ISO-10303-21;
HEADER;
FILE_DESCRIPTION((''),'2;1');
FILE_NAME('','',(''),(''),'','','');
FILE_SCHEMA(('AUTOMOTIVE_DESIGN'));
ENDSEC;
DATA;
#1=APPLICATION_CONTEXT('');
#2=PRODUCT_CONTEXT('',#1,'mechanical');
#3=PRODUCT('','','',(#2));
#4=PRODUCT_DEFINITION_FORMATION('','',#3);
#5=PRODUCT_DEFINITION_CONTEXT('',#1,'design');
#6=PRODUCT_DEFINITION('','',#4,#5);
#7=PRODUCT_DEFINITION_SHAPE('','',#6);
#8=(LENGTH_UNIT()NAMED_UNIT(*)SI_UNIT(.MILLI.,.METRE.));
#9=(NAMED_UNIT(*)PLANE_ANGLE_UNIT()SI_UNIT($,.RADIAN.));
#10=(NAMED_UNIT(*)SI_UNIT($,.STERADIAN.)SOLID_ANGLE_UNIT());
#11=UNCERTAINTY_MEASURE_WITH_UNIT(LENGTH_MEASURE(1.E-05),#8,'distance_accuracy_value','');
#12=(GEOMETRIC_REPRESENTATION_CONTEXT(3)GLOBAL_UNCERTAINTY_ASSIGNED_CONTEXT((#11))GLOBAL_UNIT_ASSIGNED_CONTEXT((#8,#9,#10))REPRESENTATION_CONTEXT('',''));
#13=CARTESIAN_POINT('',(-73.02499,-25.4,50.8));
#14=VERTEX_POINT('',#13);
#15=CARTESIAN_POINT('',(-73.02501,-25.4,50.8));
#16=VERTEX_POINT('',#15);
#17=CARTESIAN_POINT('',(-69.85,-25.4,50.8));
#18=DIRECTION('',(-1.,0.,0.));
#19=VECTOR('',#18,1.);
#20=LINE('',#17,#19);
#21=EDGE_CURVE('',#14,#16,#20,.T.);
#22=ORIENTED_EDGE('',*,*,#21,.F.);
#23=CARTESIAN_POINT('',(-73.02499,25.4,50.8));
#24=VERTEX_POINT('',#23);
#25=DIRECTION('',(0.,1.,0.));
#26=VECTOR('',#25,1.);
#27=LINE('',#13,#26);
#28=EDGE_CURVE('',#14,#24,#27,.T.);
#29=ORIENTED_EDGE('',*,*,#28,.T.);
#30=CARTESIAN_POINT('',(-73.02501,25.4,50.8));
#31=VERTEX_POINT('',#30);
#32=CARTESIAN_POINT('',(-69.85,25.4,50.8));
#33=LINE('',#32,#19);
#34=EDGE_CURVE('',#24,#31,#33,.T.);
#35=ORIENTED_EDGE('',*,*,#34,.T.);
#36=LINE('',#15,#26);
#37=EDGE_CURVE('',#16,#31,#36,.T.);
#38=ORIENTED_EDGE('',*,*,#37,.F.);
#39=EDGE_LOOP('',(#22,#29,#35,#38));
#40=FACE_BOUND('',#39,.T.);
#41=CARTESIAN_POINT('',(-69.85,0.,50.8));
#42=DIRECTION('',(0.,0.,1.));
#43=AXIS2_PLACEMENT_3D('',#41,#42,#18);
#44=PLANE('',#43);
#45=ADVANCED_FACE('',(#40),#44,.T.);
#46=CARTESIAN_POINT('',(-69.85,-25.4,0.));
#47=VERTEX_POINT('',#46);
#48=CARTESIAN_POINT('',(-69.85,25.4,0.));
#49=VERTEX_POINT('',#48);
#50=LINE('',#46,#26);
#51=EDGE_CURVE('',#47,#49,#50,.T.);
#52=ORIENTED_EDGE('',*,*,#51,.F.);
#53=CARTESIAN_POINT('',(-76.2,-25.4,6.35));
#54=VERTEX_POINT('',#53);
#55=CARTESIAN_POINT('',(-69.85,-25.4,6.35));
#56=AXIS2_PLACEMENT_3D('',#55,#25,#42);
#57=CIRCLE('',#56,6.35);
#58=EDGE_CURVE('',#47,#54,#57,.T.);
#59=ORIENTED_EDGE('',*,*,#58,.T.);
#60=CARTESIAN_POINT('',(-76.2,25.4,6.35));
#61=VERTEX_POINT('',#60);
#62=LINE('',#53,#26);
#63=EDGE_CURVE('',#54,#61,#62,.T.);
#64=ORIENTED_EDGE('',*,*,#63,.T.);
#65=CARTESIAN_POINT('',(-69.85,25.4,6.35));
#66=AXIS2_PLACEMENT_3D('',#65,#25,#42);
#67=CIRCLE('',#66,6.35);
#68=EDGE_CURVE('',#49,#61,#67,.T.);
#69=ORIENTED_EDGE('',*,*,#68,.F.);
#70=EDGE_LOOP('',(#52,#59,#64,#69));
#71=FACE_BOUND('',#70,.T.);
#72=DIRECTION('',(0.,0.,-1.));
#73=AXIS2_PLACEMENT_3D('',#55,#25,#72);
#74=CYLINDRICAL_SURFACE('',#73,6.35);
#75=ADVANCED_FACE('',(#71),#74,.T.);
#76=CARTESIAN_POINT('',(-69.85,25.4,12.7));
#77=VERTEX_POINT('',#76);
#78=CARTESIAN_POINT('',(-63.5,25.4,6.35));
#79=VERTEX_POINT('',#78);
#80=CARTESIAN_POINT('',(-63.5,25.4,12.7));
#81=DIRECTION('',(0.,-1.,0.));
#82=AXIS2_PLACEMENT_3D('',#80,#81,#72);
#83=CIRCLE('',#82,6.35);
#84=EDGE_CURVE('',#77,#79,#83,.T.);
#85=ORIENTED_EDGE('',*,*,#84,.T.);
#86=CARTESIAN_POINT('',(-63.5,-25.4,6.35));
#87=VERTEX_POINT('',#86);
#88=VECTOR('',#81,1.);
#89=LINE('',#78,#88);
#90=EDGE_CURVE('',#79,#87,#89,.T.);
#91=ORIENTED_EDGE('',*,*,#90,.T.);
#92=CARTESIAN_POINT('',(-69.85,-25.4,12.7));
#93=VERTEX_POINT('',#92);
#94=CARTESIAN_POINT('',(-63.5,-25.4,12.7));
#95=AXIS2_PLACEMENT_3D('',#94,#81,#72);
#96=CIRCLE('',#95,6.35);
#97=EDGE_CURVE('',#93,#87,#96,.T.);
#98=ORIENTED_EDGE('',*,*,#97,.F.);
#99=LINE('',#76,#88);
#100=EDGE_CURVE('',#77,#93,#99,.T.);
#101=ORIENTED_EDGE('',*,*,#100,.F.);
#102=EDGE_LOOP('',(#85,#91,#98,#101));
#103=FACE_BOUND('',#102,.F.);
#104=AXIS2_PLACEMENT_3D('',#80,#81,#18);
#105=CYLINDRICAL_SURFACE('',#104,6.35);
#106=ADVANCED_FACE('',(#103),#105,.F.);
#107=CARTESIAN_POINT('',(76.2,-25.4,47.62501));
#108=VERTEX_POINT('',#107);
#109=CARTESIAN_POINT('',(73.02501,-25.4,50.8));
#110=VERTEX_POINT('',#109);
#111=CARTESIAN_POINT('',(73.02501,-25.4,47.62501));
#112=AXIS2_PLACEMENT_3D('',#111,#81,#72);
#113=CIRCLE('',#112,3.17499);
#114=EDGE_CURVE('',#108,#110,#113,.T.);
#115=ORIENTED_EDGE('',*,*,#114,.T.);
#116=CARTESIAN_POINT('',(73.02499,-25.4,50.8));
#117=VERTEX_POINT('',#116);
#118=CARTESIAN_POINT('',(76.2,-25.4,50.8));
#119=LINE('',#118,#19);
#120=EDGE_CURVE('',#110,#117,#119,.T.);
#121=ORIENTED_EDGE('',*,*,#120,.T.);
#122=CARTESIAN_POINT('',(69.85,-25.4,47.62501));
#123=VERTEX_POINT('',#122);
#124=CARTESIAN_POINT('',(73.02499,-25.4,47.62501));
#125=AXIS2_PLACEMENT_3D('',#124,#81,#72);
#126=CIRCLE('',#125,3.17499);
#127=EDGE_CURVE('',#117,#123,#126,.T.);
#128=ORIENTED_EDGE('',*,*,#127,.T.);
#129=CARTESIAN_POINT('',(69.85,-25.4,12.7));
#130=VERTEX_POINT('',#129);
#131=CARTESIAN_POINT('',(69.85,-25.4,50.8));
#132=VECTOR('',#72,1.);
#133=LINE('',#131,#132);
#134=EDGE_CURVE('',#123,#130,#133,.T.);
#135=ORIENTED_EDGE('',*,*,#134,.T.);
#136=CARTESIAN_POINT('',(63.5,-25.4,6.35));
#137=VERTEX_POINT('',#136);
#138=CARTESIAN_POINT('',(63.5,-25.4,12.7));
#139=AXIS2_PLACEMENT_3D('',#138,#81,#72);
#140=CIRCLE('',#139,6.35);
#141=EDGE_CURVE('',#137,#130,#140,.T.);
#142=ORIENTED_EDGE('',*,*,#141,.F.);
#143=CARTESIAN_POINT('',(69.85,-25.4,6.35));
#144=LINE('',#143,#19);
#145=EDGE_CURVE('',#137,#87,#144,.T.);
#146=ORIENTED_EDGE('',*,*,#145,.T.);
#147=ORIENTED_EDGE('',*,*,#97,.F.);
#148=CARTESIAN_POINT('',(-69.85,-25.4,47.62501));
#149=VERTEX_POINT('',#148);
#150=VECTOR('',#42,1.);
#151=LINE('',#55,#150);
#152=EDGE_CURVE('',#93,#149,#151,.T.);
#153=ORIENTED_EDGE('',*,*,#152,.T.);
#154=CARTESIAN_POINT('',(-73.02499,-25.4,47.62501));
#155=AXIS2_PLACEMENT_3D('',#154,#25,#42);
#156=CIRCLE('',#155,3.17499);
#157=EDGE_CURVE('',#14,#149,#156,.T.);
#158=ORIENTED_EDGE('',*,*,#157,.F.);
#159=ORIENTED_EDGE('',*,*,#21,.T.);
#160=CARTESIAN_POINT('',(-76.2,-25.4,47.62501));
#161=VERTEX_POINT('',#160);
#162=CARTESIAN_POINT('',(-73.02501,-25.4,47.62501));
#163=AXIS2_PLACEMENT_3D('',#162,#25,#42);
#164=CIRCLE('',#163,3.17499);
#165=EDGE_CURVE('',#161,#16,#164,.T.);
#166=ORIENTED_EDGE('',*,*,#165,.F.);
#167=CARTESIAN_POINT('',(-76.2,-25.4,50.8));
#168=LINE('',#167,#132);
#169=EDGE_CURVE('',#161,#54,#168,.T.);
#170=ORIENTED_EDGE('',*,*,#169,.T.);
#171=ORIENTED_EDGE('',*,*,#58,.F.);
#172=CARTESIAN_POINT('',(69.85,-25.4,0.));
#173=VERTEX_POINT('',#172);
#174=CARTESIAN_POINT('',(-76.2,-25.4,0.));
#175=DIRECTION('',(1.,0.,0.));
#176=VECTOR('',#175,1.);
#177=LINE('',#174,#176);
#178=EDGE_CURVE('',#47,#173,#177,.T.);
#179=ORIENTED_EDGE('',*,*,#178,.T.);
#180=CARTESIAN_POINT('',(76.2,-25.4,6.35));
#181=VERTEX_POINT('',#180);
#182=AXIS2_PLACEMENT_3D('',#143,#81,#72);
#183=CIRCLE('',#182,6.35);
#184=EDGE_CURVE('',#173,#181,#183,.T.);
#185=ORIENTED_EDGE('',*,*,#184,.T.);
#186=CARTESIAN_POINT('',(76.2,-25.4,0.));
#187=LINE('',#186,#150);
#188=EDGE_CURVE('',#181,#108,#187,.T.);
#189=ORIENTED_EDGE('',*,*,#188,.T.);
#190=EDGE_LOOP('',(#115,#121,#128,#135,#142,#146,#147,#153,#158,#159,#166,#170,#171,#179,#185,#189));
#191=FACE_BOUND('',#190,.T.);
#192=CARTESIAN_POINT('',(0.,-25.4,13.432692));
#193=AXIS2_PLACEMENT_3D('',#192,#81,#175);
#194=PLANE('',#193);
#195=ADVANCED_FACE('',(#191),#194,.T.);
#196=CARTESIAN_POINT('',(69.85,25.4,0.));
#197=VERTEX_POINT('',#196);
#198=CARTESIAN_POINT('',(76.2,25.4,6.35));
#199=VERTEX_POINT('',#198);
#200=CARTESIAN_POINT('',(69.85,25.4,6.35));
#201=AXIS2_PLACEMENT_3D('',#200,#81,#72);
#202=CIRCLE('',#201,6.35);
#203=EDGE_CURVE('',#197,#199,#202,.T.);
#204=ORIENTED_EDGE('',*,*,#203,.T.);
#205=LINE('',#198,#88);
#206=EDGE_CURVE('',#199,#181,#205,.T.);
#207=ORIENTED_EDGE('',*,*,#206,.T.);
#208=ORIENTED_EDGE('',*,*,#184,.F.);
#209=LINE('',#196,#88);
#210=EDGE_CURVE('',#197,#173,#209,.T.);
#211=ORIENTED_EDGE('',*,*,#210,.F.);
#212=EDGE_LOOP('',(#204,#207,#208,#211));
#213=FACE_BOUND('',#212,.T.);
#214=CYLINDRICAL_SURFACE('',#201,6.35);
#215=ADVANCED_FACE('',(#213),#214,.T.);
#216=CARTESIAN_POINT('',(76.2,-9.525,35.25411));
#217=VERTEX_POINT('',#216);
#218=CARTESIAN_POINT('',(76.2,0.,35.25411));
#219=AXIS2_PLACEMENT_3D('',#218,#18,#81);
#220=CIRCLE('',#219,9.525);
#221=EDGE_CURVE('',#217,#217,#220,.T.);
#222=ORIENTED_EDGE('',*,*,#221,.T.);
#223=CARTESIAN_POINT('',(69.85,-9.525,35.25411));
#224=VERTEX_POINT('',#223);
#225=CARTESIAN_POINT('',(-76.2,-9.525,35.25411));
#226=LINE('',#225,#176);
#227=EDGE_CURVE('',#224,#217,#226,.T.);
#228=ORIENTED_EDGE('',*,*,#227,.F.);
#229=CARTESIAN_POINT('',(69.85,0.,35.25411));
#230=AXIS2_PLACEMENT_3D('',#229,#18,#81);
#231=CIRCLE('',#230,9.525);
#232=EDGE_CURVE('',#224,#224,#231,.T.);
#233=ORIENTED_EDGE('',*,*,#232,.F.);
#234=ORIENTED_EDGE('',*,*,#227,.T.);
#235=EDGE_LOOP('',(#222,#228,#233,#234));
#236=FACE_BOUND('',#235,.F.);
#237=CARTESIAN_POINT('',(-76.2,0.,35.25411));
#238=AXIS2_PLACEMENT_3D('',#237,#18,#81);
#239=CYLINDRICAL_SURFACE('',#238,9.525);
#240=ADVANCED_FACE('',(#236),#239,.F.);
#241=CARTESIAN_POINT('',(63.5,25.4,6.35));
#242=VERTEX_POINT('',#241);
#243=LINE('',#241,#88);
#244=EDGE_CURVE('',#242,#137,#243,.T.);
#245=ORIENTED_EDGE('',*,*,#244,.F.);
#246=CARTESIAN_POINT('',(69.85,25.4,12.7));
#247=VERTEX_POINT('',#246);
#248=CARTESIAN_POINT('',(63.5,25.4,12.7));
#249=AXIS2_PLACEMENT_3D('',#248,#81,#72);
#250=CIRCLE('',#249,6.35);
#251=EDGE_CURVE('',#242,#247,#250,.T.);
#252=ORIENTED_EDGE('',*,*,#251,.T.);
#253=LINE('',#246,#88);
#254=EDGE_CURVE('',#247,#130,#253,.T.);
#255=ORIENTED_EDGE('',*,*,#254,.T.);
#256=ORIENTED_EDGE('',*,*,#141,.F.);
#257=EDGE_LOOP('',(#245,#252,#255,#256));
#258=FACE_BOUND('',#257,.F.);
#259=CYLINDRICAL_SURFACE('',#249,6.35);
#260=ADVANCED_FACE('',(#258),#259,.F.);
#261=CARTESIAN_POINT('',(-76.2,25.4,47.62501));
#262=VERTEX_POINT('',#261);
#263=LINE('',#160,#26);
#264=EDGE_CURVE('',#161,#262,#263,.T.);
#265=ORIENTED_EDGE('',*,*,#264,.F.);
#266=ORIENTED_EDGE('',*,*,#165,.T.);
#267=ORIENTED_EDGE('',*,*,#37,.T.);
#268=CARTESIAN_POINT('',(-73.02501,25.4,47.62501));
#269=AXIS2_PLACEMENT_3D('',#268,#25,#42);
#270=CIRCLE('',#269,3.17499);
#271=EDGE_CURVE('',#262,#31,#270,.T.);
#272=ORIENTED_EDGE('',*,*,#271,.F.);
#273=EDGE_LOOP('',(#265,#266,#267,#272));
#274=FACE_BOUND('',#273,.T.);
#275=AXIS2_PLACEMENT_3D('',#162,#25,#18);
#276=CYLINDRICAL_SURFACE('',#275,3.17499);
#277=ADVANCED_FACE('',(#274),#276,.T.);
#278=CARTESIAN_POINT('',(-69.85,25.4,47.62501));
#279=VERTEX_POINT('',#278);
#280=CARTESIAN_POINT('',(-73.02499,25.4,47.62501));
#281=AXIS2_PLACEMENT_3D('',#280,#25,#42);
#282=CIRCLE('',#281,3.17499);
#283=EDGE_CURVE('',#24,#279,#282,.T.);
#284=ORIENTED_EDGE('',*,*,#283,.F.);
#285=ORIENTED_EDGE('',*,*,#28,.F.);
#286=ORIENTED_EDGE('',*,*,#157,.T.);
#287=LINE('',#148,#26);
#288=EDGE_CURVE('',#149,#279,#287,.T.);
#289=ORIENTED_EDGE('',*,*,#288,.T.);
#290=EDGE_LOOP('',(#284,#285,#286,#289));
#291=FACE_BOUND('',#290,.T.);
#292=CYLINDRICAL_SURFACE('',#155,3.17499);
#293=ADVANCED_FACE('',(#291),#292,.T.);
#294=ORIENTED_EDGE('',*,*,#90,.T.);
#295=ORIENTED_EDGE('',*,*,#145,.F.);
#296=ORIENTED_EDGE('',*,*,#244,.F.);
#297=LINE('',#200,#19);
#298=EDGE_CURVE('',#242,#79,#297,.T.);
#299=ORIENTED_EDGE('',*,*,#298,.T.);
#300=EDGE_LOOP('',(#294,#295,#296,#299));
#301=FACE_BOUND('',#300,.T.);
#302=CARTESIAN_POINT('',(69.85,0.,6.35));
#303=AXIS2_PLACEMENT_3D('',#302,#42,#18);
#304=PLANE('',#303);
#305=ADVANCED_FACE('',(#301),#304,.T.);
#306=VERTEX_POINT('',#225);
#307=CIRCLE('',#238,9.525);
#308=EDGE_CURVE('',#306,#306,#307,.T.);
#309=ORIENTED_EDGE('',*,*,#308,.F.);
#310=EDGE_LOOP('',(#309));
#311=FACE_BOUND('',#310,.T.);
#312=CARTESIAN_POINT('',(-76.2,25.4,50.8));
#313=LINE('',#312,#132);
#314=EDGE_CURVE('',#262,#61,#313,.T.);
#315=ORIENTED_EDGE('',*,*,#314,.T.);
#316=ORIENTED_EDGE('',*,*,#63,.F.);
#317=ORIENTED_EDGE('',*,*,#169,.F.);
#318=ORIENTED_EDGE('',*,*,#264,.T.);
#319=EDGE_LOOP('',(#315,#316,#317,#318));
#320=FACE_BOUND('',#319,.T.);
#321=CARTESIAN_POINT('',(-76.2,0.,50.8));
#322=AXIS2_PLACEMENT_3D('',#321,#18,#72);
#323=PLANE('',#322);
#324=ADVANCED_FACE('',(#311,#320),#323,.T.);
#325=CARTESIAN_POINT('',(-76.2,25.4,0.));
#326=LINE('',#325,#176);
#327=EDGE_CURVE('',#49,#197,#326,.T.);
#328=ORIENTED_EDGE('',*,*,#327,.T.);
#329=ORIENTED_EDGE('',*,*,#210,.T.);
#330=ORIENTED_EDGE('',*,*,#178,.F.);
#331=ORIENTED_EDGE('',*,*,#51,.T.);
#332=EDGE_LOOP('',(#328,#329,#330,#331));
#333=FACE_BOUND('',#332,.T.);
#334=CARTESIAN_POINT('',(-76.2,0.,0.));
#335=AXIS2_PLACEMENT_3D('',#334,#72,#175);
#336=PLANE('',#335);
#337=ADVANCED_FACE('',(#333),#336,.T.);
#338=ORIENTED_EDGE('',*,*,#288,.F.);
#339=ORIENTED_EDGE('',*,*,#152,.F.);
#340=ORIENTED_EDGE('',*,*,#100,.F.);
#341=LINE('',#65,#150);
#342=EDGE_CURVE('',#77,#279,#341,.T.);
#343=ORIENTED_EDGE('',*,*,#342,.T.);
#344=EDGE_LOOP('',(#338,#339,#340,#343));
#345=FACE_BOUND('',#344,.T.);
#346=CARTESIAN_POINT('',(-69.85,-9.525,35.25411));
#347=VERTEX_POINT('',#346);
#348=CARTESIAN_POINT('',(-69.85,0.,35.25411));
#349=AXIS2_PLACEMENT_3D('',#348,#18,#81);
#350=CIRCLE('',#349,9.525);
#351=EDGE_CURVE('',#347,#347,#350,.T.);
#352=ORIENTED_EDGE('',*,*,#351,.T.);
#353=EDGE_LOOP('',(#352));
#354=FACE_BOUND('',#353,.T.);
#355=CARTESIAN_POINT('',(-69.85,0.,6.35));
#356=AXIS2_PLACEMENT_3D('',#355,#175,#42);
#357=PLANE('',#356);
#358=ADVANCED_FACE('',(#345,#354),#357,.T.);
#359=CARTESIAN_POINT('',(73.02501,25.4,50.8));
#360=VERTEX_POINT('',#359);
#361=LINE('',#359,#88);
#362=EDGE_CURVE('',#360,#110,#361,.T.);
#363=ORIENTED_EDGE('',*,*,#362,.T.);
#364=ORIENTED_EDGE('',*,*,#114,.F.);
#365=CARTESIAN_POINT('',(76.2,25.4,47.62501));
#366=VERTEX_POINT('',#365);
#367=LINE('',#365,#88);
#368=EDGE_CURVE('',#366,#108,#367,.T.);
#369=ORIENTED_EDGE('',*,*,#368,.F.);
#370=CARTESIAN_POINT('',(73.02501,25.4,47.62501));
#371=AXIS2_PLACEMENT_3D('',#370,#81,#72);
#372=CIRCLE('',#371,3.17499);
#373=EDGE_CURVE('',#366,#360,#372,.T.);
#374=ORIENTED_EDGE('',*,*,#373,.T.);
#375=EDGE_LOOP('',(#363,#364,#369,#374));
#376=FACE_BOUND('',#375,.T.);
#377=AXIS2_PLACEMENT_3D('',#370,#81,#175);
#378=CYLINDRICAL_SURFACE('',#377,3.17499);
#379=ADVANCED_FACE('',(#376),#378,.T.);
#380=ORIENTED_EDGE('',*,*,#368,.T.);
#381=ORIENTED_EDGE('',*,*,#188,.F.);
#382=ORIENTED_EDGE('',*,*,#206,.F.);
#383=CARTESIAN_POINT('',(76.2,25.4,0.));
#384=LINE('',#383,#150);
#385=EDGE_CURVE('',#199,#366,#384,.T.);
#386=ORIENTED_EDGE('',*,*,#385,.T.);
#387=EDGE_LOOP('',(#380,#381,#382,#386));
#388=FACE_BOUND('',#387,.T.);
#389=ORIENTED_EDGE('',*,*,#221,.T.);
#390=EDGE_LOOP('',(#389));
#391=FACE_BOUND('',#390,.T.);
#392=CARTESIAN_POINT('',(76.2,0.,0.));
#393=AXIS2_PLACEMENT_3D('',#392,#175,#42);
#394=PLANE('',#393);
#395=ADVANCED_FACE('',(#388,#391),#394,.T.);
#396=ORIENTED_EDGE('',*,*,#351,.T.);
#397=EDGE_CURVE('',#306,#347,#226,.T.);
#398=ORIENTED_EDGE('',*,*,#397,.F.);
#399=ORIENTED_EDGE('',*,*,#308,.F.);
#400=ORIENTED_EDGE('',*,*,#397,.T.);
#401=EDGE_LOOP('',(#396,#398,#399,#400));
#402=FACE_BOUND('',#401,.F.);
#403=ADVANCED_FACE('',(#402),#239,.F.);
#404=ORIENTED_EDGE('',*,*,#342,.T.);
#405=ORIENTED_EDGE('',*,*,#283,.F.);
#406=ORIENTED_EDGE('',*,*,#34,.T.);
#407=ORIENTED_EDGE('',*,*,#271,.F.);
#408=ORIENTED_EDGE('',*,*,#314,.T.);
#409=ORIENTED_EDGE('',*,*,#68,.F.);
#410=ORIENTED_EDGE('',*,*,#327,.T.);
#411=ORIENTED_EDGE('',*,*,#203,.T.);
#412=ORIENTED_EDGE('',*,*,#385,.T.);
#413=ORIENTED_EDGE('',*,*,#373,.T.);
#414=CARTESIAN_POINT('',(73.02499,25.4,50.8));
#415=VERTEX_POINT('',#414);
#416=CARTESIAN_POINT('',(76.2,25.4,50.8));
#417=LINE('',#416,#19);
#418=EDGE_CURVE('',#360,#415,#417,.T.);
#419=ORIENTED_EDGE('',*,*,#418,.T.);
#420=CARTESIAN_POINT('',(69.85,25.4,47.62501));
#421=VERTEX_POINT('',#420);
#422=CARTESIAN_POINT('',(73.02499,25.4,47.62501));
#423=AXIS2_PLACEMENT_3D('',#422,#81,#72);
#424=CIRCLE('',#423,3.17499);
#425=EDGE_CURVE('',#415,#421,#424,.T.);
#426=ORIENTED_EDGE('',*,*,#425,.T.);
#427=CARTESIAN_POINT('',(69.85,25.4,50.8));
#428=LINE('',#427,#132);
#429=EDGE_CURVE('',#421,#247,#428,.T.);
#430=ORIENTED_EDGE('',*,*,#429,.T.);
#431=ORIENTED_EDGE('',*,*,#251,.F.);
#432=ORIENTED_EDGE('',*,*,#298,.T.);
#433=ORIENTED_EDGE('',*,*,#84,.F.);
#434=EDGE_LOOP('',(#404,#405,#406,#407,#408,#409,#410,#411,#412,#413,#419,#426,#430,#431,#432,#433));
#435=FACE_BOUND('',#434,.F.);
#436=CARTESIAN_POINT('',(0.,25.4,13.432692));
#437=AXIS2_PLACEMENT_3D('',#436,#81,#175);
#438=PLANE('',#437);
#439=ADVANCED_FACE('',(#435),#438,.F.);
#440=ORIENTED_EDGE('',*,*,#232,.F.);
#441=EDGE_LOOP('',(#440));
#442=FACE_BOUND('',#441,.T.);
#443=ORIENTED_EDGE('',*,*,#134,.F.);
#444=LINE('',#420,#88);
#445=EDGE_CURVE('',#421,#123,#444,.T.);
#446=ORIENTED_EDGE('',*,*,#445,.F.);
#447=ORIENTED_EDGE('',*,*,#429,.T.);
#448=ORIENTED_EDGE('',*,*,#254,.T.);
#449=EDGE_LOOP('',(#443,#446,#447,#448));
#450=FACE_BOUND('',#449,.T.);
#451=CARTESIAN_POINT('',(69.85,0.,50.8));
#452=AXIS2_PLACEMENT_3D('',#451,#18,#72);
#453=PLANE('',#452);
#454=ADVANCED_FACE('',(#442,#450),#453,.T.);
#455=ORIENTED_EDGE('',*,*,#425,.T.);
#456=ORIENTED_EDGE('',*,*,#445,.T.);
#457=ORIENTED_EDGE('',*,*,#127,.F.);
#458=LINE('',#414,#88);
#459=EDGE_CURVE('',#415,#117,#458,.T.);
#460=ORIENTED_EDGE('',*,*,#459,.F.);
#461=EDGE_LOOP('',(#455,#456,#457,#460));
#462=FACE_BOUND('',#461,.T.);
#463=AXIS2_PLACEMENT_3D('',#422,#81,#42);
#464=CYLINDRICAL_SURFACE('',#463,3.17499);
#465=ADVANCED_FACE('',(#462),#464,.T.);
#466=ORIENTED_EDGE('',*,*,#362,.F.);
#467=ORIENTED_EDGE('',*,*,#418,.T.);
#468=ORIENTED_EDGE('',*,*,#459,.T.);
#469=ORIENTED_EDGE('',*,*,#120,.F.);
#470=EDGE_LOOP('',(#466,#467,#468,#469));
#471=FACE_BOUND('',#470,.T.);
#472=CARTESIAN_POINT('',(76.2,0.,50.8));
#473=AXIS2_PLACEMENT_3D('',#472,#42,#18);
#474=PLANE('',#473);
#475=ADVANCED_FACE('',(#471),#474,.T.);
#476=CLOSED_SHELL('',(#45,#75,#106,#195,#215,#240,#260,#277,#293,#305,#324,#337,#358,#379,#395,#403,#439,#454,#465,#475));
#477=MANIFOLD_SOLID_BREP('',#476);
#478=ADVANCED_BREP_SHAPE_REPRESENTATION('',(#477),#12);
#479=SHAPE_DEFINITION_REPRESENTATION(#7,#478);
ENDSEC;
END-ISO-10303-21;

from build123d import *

# Parameters (mm, degrees)
F1_DEPTH = 25.4
F2_R     = 6.35
F3_R     = 3.17499
F4_R     = 9.525
F5_DEPTH = 152.401


# Not quite as in the source:
# - a fillet or chamfer is up to 0.001 mm smaller than in the source, because OpenCascade refuses the exact size


with BuildPart() as f1:
    # F0 (on Front) → F1 (new body, symmetric)
    with BuildSketch(Plane.XZ):
        Polygon((-76.2, 0), (0, 0), (76.2, 0), (76.2, 50.8), (69.85, 50.8), (69.85, 6.35), (0, 6.35), (-69.85, 6.35), (-69.85, 50.8), (-76.2, 50.8), align=None)
    extrude(amount=F1_DEPTH, both=True)

    # F2
    f2_edges = [f1.edges().sort_by_distance(p)[0] for p in [
        (-69.85, 0, 6.35),
        (69.85, 0, 6.35),
        (76.2, 0, 0),
        (-76.2, 0, 0),
    ]]
    fillet(f2_edges, radius=F2_R)

    # F3 (radius 3.175 in the source; OpenCascade refuses exactly that, so slightly less here)
    f3_edges = [f1.edges().sort_by_distance(p)[0] for p in [
        (-69.85, 0, 50.8),
        (-76.2, 0, 50.8),
        (69.85, 0, 50.8),
        (76.2, 0, 50.8),
    ]]
    fillet(f3_edges, radius=F3_R)

    # F4 (on face) → F5 (cut, through all)
    with BuildSketch(Plane(origin=(-76.2, 0, 0), x_dir=(0, -1, 0), z_dir=(-1, 0, 0))):
        with Locations((0, 35.2541096509)):
            Circle(F4_R)
    extrude(amount=-F5_DEPTH, mode=Mode.SUBTRACT)


solid = f1.part
